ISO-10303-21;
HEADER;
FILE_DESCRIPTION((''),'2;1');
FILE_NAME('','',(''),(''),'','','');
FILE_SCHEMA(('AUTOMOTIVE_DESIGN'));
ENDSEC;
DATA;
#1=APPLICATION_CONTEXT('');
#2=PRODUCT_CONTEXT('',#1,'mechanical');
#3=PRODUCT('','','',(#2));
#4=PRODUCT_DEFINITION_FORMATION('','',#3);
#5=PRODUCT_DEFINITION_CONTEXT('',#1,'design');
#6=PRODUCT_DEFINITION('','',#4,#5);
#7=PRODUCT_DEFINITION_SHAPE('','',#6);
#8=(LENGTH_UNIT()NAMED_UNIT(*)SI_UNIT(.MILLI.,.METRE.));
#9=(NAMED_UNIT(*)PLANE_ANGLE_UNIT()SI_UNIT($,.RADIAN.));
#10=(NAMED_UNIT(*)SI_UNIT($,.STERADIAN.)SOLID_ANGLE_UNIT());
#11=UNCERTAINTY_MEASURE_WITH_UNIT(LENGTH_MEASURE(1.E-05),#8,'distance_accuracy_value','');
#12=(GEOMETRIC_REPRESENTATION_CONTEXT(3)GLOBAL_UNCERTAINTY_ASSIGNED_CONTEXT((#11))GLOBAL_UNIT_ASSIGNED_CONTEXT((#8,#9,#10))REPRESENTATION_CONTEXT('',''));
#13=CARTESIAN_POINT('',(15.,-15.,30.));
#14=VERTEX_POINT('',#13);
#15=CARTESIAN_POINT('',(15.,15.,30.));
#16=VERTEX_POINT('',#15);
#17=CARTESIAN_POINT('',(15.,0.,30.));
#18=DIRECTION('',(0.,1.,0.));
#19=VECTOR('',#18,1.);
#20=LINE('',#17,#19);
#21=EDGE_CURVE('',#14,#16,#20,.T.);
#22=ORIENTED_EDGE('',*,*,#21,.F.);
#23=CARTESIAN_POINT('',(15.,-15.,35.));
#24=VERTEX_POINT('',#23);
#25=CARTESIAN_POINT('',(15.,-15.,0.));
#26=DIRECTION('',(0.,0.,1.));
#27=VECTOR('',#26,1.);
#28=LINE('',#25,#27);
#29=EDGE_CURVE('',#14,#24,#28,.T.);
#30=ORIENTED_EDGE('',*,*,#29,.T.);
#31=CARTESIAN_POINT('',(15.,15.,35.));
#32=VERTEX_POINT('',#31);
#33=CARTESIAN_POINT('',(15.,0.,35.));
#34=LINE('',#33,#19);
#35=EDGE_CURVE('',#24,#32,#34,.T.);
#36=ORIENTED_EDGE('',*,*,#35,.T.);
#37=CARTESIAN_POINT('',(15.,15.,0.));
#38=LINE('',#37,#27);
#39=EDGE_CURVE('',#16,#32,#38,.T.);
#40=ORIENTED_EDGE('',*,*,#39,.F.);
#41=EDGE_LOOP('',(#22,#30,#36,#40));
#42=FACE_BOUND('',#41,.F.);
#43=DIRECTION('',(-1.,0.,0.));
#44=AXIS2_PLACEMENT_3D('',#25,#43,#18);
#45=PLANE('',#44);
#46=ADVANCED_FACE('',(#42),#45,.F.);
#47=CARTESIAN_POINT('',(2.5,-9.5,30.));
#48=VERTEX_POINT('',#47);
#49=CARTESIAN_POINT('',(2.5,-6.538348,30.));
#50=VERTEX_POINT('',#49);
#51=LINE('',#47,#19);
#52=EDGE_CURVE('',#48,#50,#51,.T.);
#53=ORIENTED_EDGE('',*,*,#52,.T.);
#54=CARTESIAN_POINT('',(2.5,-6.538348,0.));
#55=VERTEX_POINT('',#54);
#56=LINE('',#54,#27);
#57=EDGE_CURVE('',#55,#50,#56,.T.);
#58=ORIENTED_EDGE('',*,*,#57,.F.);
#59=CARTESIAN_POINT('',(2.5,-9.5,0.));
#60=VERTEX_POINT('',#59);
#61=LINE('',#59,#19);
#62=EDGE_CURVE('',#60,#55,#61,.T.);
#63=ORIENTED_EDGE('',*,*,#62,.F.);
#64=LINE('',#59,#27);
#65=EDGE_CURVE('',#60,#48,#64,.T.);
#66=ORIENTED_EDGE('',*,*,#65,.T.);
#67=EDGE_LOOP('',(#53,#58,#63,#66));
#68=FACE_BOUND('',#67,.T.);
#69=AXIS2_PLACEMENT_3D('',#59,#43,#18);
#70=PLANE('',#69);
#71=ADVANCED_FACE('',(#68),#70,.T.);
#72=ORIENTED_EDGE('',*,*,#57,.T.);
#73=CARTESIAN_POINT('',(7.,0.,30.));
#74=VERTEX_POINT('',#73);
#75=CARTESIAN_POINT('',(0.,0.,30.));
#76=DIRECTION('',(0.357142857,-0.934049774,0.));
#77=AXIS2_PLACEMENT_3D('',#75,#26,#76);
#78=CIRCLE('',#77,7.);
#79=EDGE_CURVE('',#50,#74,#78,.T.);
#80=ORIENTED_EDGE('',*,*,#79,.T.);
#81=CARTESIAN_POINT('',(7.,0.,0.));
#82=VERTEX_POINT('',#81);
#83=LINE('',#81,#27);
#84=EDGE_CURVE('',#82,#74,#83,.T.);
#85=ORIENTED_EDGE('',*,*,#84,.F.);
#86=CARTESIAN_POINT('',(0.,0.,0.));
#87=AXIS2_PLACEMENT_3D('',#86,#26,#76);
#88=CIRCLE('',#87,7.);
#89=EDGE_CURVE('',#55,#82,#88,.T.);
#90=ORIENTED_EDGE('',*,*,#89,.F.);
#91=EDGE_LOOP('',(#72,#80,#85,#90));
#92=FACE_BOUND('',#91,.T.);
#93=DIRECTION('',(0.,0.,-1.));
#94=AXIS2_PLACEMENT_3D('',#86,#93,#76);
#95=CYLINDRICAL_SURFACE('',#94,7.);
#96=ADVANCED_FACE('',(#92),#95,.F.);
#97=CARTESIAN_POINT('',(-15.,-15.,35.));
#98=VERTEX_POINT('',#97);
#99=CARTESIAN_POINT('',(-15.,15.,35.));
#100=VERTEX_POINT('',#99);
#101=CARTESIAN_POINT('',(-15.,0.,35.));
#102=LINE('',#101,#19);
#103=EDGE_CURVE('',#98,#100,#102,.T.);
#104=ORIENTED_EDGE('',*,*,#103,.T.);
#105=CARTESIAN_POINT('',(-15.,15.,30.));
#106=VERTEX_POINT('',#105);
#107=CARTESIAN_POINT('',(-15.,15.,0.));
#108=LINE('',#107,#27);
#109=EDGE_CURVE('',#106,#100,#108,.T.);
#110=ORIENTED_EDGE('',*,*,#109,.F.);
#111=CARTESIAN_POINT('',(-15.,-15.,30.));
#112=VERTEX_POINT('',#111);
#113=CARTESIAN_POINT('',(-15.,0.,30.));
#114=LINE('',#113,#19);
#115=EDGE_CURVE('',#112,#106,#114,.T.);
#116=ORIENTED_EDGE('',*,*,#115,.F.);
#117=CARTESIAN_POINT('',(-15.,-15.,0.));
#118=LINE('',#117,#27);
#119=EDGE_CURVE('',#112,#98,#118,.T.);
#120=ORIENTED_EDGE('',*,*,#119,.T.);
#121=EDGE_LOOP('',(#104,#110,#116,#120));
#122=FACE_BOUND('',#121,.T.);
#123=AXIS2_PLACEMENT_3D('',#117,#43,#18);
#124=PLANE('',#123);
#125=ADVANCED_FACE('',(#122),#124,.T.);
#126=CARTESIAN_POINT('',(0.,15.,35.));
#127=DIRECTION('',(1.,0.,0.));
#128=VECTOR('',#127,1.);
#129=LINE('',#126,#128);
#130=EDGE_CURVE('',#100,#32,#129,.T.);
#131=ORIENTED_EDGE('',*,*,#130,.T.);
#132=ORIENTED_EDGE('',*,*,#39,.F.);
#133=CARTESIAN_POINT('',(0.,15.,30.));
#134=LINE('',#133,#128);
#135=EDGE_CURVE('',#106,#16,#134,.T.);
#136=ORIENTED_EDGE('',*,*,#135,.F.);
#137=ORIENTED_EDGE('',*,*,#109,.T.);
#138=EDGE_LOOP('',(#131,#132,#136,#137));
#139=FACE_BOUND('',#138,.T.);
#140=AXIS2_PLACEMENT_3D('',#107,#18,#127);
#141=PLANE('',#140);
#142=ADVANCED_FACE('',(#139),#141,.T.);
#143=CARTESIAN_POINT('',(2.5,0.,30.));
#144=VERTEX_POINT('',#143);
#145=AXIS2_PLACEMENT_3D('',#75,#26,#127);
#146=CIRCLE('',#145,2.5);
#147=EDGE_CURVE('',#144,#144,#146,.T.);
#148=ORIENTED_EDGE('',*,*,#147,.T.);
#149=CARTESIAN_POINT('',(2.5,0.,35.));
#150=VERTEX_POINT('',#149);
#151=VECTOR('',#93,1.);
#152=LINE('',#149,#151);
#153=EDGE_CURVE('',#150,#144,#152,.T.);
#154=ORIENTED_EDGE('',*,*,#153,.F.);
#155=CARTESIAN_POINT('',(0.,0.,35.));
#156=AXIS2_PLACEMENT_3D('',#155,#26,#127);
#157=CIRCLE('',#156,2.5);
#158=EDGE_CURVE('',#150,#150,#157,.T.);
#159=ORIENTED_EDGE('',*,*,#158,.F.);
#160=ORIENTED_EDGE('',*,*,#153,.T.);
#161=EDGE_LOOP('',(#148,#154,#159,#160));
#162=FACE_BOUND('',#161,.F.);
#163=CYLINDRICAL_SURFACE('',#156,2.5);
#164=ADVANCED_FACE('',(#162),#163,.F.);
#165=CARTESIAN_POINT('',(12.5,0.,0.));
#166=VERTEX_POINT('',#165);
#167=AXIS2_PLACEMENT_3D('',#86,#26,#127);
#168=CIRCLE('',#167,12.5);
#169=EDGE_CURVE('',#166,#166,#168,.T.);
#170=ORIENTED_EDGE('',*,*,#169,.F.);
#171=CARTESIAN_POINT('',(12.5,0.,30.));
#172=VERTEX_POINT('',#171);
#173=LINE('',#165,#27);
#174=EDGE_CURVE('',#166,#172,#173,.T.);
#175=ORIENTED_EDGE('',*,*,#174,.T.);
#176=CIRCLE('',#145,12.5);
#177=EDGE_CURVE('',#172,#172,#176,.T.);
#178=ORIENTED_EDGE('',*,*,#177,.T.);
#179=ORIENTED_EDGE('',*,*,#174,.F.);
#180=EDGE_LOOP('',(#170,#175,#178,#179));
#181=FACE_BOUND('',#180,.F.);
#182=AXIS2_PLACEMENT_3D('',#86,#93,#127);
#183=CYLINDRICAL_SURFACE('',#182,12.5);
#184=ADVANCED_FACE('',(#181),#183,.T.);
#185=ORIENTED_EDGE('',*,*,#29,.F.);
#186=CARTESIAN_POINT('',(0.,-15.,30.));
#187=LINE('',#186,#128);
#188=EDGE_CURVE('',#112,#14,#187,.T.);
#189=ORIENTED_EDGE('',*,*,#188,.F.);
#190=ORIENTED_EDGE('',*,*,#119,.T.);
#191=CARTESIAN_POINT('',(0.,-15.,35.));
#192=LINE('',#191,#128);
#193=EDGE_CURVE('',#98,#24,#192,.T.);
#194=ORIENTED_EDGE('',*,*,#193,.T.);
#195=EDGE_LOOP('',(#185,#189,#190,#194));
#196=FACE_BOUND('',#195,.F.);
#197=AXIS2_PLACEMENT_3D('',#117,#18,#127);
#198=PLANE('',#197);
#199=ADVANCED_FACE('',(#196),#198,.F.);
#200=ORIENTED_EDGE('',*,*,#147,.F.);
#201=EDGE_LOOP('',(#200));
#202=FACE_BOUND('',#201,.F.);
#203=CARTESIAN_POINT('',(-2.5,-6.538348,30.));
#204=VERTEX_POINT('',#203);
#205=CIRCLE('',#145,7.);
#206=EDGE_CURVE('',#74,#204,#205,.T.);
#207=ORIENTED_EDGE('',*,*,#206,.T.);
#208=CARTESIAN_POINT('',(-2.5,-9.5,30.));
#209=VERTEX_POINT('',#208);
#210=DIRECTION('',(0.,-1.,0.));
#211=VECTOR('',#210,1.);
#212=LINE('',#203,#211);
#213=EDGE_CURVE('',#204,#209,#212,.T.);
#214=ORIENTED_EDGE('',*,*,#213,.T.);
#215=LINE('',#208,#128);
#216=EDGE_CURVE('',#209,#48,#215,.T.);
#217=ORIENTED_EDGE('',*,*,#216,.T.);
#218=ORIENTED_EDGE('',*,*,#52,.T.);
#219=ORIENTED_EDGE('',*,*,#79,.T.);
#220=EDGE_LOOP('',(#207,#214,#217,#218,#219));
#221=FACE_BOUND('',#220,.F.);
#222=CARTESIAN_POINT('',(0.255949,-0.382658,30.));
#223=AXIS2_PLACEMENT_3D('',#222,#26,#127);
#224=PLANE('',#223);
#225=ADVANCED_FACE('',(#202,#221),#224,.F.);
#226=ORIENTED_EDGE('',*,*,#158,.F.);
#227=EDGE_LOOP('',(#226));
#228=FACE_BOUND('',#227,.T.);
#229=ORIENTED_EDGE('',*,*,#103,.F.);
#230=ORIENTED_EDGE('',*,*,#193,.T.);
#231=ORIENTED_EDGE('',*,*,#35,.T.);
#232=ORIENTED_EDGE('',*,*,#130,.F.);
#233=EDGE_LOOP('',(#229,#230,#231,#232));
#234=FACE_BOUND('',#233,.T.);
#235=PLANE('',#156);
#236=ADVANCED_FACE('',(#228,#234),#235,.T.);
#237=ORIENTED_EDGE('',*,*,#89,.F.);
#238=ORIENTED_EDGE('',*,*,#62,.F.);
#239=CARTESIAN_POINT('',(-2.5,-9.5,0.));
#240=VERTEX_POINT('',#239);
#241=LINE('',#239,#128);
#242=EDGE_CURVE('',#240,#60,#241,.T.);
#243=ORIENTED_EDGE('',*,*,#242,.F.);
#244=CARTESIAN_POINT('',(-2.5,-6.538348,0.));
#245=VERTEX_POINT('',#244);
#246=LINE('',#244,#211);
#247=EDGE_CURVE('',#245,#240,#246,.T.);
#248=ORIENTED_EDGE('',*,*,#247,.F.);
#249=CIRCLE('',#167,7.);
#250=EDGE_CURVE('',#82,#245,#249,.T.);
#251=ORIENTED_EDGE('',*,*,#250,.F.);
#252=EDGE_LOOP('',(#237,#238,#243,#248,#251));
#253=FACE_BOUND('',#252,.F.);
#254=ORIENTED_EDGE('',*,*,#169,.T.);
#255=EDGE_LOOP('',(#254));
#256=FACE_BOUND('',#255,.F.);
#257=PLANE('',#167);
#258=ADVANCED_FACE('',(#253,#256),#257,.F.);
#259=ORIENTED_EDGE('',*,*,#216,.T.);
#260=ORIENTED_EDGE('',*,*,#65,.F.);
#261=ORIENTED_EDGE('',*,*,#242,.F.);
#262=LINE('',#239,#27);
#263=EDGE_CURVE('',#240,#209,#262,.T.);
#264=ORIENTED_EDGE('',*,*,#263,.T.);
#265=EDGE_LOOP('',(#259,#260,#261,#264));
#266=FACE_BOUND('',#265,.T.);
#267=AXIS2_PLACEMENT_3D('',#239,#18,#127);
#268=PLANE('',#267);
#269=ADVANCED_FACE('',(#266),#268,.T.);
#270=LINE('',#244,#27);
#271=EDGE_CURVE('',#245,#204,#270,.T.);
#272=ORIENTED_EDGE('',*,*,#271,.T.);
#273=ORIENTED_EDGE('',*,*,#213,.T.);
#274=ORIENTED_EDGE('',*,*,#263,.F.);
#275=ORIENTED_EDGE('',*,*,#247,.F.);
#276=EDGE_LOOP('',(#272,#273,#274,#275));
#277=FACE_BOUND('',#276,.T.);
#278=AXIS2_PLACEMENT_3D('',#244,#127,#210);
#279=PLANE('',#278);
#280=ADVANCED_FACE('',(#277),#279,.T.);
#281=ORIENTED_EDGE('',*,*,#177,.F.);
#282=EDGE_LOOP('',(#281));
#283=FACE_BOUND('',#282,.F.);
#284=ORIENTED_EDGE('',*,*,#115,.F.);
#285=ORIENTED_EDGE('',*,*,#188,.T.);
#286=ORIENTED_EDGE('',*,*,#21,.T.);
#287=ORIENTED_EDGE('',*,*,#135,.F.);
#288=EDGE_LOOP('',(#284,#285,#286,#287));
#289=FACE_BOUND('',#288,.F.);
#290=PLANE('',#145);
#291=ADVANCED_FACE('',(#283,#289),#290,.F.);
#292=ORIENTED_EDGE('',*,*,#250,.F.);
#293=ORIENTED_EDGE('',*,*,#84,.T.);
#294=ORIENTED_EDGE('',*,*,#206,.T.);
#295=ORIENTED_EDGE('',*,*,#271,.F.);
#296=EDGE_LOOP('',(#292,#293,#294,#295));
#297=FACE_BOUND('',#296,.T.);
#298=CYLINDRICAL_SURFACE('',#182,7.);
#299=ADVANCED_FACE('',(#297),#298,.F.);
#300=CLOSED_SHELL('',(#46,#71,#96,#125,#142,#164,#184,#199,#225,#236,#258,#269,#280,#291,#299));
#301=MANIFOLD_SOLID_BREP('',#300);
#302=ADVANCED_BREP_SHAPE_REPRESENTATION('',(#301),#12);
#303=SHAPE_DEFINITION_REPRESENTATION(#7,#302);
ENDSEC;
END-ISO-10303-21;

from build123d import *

# Parameters (mm, degrees)
F0_W     = 30
F0_H     = 30
F1_DEPTH = 35
F2_DEPTH = 30
F3_R     = 2.5
F4_DEPTH = 35.001
F5_W     = 30
F5_H     = 30
F5_R     = 12.5
F6_DEPTH = 30


with BuildPart() as f1:
    # F0 (on Top) → F1 (new body)
    with BuildSketch(Plane.XY):
        Rectangle(F0_W, F0_H)
        with BuildLine():
            ThreePointArc((-2.5, -6.5383484153), (-3.9686269666, 5.7662812973), (7, 0))
            ThreePointArc((7, 0), (5.7662812973, -3.9686269666), (2.5, -6.5383484153))
            Line((2.5, -6.5383484153), (2.5, -9.5))
            Line((2.5, -9.5), (0, -9.5))
            Line((0, -9.5), (-2.5, -9.5))
            Line((-2.5, -9.5), (-2.5, -6.5383484153))
        make_face(mode=Mode.SUBTRACT)
        with BuildLine():
            ThreePointArc((2.5, -6.5383484153), (5.7662812973, -3.9686269666), (7, 0))
            ThreePointArc((7, 0), (-3.9686269666, 5.7662812973), (-2.5, -6.5383484153))
            ThreePointArc((-2.5, -6.5383484153), (0, -7), (2.5, -6.5383484153))
        make_face()
        with BuildLine():
            ThreePointArc((2.5, -6.5383484153), (0, -7), (-2.5, -6.5383484153))
            Line((-2.5, -6.5383484153), (-2.5, -9.5))
            Line((-2.5, -9.5), (0, -9.5))
            Line((0, -9.5), (2.5, -9.5))
            Line((2.5, -9.5), (2.5, -6.5383484153))
        make_face()
    extrude(amount=F1_DEPTH)

    # F0 (on Top) → F2 (cut)
    with BuildSketch(Plane.XY):
        with BuildLine():
            ThreePointArc((2.5, -6.5383484153), (5.7662812973, -3.9686269666), (7, 0))
            ThreePointArc((7, 0), (-3.9686269666, 5.7662812973), (-2.5, -6.5383484153))
            ThreePointArc((-2.5, -6.5383484153), (0, -7), (2.5, -6.5383484153))
        make_face()
        with BuildLine():
            ThreePointArc((2.5, -6.5383484153), (0, -7), (-2.5, -6.5383484153))
            Line((-2.5, -6.5383484153), (-2.5, -9.5))
            Line((-2.5, -9.5), (0, -9.5))
            Line((0, -9.5), (2.5, -9.5))
            Line((2.5, -9.5), (2.5, -6.5383484153))
        make_face()
    extrude(amount=F2_DEPTH, mode=Mode.SUBTRACT)

    # F3 (on face) → F4 (cut, through all)
    with BuildSketch(Plane.XY.offset(35)):
        Circle(F3_R)
    extrude(amount=-F4_DEPTH, mode=Mode.SUBTRACT)

    # F5 (on face) → F6 (cut)
    with BuildSketch(Plane.XY):
        Rectangle(F5_W, F5_H)
        Circle(F5_R, mode=Mode.SUBTRACT)
    extrude(amount=F6_DEPTH, mode=Mode.SUBTRACT)


solid = f1.part
